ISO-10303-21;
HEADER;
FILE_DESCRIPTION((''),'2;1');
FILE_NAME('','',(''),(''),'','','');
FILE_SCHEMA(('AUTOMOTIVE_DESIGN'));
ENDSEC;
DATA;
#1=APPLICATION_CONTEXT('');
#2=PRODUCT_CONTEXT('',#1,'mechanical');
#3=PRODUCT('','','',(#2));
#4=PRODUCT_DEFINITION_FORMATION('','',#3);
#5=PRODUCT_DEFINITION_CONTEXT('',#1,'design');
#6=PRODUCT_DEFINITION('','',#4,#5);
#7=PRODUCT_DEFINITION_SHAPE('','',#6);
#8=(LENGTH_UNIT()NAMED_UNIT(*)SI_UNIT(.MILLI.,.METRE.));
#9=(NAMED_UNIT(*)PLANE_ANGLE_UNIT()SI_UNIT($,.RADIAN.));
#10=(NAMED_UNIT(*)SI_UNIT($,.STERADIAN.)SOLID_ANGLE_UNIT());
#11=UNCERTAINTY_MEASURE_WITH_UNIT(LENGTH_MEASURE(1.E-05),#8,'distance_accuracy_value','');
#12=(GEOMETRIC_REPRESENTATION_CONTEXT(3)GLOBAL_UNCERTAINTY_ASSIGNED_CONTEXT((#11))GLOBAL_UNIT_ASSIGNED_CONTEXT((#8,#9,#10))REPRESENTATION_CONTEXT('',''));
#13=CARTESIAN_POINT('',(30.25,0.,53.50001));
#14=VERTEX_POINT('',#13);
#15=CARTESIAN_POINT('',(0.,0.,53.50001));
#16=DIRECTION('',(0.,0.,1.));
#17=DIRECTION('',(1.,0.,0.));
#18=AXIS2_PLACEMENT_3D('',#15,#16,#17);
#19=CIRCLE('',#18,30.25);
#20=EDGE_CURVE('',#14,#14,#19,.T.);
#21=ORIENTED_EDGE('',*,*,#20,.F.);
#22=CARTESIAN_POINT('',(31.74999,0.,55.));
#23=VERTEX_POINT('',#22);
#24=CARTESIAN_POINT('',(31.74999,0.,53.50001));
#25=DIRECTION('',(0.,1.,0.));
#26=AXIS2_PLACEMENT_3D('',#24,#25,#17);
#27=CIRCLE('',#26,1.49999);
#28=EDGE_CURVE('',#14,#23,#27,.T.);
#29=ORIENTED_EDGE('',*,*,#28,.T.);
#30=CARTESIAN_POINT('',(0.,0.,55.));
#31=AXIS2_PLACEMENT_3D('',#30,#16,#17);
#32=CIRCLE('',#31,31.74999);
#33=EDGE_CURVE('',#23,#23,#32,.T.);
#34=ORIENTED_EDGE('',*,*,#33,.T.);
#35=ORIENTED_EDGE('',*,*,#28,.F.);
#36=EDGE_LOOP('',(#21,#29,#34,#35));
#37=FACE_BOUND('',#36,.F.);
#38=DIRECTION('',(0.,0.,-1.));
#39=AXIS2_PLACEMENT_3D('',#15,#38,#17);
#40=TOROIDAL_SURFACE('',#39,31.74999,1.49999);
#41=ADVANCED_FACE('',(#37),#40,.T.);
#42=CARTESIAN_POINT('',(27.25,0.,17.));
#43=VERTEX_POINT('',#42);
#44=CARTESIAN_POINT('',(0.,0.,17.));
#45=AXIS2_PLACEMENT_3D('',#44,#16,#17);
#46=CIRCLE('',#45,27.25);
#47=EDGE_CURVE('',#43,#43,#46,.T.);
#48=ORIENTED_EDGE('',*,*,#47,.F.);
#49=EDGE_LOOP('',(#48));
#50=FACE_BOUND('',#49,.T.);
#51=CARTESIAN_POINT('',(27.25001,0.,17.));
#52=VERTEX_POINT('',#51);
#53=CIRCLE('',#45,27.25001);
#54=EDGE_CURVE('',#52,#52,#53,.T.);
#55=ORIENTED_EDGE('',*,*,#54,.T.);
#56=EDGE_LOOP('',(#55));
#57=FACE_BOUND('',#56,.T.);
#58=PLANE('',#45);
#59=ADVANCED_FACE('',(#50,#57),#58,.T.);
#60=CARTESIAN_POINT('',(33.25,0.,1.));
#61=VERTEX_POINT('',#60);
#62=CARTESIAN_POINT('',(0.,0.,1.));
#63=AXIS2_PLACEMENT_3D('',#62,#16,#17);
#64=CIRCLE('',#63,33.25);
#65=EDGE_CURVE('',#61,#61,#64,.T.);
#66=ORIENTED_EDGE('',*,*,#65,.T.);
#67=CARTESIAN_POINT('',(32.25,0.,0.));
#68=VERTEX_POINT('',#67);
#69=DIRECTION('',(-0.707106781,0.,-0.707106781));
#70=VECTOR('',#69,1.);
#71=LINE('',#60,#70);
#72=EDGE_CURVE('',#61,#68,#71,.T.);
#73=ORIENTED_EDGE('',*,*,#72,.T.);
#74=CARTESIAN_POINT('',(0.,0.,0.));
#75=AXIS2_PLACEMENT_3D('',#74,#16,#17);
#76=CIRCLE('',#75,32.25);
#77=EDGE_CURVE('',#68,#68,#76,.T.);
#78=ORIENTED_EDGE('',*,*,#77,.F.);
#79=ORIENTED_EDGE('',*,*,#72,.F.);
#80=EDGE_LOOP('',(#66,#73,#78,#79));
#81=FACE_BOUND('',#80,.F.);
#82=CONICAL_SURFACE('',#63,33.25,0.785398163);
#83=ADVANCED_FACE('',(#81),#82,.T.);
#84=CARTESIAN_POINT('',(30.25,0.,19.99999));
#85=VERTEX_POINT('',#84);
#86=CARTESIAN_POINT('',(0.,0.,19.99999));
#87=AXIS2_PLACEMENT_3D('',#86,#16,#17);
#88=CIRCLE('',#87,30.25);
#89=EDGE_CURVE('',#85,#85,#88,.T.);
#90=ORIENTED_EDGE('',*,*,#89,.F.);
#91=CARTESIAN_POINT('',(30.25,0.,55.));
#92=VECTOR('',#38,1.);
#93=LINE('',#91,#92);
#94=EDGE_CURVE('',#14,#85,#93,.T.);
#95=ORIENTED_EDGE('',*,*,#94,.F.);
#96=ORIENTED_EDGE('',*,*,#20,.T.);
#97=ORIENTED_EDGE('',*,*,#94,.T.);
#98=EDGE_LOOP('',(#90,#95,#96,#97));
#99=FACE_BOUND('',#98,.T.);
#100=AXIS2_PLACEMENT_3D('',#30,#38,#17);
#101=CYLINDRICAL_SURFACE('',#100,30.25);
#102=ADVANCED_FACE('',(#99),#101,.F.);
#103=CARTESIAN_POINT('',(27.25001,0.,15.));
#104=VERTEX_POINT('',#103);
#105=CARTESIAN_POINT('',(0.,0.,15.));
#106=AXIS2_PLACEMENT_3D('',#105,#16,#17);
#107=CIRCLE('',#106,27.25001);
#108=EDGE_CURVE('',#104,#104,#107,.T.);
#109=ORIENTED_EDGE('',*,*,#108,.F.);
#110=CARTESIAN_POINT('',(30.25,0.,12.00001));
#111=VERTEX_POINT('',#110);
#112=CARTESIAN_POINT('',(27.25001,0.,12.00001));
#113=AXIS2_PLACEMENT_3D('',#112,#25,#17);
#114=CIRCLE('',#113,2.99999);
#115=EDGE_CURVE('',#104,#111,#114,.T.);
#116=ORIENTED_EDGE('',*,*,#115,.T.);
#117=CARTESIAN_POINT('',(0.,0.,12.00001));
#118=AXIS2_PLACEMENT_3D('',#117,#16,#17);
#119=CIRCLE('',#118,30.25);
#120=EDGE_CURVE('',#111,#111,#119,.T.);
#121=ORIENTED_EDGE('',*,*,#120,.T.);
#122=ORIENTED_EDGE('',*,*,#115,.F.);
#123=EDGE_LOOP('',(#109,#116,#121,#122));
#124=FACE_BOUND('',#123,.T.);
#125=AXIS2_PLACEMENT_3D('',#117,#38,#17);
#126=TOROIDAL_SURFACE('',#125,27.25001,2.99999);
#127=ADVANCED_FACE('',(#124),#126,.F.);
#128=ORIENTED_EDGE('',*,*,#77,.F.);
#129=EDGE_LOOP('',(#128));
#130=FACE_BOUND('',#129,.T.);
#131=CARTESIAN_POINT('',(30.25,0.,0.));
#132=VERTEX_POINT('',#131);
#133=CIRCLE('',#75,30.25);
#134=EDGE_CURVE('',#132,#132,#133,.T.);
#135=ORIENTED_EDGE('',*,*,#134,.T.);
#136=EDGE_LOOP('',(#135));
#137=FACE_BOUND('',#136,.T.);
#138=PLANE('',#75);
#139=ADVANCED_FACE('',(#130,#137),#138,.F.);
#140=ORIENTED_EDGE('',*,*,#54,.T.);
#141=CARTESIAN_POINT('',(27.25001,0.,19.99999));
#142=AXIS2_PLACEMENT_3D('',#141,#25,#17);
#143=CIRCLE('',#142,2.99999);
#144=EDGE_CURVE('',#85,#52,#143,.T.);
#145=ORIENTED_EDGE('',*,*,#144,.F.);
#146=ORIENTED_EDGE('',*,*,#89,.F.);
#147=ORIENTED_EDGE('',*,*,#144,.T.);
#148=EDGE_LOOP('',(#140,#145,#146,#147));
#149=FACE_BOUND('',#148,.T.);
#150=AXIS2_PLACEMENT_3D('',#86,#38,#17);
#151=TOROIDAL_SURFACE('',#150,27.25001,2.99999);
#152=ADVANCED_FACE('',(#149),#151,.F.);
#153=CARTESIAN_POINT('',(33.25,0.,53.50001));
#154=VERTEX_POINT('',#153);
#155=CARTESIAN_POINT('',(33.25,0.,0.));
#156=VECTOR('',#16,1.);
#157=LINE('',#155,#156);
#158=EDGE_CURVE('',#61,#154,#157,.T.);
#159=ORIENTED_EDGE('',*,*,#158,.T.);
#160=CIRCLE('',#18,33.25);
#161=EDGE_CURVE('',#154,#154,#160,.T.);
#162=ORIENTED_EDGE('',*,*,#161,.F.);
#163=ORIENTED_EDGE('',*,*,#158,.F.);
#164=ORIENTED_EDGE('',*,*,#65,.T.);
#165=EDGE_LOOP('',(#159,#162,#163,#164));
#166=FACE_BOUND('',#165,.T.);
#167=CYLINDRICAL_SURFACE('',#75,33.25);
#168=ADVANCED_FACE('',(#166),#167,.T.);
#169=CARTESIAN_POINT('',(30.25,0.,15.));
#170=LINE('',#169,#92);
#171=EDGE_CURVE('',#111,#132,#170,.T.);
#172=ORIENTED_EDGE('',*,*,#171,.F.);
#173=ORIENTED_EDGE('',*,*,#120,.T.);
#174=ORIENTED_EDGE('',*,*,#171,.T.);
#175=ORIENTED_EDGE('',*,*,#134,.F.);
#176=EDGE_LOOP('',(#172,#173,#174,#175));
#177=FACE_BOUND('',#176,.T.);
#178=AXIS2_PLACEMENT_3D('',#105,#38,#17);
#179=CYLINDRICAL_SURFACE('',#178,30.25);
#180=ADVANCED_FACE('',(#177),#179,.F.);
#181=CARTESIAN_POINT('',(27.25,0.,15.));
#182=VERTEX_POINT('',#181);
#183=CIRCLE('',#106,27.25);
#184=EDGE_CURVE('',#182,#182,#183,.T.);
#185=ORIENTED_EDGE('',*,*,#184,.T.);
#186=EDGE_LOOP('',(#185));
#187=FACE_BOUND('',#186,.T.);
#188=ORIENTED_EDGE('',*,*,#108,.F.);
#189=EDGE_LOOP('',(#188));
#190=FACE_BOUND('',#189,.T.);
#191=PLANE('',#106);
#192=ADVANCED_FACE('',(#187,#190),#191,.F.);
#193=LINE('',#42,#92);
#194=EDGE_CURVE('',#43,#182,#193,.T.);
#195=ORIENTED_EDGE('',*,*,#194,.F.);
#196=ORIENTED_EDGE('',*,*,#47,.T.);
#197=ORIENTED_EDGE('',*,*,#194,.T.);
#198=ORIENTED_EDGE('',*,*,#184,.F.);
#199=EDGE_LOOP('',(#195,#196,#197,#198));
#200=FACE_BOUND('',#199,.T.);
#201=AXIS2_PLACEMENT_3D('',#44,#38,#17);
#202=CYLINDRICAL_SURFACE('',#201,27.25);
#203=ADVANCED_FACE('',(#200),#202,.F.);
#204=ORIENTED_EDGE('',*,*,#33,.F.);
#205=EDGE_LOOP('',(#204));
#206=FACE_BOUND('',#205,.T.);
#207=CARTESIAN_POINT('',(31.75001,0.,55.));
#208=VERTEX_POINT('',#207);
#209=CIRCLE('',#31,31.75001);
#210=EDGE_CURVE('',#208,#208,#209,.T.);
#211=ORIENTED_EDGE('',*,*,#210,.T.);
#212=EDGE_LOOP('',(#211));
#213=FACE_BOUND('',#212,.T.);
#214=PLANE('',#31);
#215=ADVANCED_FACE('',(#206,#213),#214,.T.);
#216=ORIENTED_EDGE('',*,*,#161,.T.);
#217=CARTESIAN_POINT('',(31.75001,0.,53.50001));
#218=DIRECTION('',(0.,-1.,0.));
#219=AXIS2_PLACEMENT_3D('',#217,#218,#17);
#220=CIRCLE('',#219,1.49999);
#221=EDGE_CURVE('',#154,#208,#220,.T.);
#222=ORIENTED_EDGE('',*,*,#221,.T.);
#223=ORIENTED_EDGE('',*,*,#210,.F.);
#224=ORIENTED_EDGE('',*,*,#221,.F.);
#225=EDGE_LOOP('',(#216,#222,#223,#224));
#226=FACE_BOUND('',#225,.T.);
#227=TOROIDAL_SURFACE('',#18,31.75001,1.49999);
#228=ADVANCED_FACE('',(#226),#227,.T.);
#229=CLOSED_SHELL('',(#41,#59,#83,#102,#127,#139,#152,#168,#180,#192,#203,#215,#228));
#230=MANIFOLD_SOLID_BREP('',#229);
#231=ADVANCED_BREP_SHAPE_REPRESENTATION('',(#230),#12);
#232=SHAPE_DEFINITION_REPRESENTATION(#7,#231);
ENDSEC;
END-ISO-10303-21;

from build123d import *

# Parameters (mm, degrees)
F2_R    = 2.99999
F3_R    = 2.99999
F4_R    = 1.49999
F5_SIZE = 1


# Not quite as in the source:
# - a fillet or chamfer is up to 0.001 mm smaller than in the source, because OpenCascade refuses the exact size


with BuildPart() as f1:
    # F0 (on Front) → F1 (revolve)
    with BuildSketch(Plane.XZ):
        Polygon((30.25, 0), (33.25, 0), (33.25, 55), (30.25, 55), (30.25, 17), (27.25, 17), (27.25, 15), (30.25, 15), align=None)
    revolve(axis=Axis((0, 0, 28.8916025311), (0, 0, 1)))

    # F2 (radius 3 in the source; OpenCascade refuses exactly that, so slightly less here)
    f2_edges = [f1.edges().sort_by_distance(p)[0] for p in [
        (-30.25, 0, 17),
    ]]
    fillet(f2_edges, radius=F2_R)

    # F3 (radius 3 in the source; OpenCascade refuses exactly that, so slightly less here)
    f3_edges = [f1.edges().sort_by_distance(p)[0] for p in [
        (-30.25, 0, 15),
    ]]
    fillet(f3_edges, radius=F3_R)

    # F4 (radius 1.5 in the source; OpenCascade refuses exactly that, so slightly less here)
    f4_edges = [f1.edges().sort_by_distance(p)[0] for p in [
        (-30.25, 0, 55),
        (-33.25, 0, 55),
    ]]
    fillet(f4_edges, radius=F4_R)

    # F5
    f5_edges = [f1.edges().sort_by_distance(p)[0] for p in [
        (-33.25, 0, 0),
    ]]
    chamfer(f5_edges, length=F5_SIZE)


solid = f1.part
